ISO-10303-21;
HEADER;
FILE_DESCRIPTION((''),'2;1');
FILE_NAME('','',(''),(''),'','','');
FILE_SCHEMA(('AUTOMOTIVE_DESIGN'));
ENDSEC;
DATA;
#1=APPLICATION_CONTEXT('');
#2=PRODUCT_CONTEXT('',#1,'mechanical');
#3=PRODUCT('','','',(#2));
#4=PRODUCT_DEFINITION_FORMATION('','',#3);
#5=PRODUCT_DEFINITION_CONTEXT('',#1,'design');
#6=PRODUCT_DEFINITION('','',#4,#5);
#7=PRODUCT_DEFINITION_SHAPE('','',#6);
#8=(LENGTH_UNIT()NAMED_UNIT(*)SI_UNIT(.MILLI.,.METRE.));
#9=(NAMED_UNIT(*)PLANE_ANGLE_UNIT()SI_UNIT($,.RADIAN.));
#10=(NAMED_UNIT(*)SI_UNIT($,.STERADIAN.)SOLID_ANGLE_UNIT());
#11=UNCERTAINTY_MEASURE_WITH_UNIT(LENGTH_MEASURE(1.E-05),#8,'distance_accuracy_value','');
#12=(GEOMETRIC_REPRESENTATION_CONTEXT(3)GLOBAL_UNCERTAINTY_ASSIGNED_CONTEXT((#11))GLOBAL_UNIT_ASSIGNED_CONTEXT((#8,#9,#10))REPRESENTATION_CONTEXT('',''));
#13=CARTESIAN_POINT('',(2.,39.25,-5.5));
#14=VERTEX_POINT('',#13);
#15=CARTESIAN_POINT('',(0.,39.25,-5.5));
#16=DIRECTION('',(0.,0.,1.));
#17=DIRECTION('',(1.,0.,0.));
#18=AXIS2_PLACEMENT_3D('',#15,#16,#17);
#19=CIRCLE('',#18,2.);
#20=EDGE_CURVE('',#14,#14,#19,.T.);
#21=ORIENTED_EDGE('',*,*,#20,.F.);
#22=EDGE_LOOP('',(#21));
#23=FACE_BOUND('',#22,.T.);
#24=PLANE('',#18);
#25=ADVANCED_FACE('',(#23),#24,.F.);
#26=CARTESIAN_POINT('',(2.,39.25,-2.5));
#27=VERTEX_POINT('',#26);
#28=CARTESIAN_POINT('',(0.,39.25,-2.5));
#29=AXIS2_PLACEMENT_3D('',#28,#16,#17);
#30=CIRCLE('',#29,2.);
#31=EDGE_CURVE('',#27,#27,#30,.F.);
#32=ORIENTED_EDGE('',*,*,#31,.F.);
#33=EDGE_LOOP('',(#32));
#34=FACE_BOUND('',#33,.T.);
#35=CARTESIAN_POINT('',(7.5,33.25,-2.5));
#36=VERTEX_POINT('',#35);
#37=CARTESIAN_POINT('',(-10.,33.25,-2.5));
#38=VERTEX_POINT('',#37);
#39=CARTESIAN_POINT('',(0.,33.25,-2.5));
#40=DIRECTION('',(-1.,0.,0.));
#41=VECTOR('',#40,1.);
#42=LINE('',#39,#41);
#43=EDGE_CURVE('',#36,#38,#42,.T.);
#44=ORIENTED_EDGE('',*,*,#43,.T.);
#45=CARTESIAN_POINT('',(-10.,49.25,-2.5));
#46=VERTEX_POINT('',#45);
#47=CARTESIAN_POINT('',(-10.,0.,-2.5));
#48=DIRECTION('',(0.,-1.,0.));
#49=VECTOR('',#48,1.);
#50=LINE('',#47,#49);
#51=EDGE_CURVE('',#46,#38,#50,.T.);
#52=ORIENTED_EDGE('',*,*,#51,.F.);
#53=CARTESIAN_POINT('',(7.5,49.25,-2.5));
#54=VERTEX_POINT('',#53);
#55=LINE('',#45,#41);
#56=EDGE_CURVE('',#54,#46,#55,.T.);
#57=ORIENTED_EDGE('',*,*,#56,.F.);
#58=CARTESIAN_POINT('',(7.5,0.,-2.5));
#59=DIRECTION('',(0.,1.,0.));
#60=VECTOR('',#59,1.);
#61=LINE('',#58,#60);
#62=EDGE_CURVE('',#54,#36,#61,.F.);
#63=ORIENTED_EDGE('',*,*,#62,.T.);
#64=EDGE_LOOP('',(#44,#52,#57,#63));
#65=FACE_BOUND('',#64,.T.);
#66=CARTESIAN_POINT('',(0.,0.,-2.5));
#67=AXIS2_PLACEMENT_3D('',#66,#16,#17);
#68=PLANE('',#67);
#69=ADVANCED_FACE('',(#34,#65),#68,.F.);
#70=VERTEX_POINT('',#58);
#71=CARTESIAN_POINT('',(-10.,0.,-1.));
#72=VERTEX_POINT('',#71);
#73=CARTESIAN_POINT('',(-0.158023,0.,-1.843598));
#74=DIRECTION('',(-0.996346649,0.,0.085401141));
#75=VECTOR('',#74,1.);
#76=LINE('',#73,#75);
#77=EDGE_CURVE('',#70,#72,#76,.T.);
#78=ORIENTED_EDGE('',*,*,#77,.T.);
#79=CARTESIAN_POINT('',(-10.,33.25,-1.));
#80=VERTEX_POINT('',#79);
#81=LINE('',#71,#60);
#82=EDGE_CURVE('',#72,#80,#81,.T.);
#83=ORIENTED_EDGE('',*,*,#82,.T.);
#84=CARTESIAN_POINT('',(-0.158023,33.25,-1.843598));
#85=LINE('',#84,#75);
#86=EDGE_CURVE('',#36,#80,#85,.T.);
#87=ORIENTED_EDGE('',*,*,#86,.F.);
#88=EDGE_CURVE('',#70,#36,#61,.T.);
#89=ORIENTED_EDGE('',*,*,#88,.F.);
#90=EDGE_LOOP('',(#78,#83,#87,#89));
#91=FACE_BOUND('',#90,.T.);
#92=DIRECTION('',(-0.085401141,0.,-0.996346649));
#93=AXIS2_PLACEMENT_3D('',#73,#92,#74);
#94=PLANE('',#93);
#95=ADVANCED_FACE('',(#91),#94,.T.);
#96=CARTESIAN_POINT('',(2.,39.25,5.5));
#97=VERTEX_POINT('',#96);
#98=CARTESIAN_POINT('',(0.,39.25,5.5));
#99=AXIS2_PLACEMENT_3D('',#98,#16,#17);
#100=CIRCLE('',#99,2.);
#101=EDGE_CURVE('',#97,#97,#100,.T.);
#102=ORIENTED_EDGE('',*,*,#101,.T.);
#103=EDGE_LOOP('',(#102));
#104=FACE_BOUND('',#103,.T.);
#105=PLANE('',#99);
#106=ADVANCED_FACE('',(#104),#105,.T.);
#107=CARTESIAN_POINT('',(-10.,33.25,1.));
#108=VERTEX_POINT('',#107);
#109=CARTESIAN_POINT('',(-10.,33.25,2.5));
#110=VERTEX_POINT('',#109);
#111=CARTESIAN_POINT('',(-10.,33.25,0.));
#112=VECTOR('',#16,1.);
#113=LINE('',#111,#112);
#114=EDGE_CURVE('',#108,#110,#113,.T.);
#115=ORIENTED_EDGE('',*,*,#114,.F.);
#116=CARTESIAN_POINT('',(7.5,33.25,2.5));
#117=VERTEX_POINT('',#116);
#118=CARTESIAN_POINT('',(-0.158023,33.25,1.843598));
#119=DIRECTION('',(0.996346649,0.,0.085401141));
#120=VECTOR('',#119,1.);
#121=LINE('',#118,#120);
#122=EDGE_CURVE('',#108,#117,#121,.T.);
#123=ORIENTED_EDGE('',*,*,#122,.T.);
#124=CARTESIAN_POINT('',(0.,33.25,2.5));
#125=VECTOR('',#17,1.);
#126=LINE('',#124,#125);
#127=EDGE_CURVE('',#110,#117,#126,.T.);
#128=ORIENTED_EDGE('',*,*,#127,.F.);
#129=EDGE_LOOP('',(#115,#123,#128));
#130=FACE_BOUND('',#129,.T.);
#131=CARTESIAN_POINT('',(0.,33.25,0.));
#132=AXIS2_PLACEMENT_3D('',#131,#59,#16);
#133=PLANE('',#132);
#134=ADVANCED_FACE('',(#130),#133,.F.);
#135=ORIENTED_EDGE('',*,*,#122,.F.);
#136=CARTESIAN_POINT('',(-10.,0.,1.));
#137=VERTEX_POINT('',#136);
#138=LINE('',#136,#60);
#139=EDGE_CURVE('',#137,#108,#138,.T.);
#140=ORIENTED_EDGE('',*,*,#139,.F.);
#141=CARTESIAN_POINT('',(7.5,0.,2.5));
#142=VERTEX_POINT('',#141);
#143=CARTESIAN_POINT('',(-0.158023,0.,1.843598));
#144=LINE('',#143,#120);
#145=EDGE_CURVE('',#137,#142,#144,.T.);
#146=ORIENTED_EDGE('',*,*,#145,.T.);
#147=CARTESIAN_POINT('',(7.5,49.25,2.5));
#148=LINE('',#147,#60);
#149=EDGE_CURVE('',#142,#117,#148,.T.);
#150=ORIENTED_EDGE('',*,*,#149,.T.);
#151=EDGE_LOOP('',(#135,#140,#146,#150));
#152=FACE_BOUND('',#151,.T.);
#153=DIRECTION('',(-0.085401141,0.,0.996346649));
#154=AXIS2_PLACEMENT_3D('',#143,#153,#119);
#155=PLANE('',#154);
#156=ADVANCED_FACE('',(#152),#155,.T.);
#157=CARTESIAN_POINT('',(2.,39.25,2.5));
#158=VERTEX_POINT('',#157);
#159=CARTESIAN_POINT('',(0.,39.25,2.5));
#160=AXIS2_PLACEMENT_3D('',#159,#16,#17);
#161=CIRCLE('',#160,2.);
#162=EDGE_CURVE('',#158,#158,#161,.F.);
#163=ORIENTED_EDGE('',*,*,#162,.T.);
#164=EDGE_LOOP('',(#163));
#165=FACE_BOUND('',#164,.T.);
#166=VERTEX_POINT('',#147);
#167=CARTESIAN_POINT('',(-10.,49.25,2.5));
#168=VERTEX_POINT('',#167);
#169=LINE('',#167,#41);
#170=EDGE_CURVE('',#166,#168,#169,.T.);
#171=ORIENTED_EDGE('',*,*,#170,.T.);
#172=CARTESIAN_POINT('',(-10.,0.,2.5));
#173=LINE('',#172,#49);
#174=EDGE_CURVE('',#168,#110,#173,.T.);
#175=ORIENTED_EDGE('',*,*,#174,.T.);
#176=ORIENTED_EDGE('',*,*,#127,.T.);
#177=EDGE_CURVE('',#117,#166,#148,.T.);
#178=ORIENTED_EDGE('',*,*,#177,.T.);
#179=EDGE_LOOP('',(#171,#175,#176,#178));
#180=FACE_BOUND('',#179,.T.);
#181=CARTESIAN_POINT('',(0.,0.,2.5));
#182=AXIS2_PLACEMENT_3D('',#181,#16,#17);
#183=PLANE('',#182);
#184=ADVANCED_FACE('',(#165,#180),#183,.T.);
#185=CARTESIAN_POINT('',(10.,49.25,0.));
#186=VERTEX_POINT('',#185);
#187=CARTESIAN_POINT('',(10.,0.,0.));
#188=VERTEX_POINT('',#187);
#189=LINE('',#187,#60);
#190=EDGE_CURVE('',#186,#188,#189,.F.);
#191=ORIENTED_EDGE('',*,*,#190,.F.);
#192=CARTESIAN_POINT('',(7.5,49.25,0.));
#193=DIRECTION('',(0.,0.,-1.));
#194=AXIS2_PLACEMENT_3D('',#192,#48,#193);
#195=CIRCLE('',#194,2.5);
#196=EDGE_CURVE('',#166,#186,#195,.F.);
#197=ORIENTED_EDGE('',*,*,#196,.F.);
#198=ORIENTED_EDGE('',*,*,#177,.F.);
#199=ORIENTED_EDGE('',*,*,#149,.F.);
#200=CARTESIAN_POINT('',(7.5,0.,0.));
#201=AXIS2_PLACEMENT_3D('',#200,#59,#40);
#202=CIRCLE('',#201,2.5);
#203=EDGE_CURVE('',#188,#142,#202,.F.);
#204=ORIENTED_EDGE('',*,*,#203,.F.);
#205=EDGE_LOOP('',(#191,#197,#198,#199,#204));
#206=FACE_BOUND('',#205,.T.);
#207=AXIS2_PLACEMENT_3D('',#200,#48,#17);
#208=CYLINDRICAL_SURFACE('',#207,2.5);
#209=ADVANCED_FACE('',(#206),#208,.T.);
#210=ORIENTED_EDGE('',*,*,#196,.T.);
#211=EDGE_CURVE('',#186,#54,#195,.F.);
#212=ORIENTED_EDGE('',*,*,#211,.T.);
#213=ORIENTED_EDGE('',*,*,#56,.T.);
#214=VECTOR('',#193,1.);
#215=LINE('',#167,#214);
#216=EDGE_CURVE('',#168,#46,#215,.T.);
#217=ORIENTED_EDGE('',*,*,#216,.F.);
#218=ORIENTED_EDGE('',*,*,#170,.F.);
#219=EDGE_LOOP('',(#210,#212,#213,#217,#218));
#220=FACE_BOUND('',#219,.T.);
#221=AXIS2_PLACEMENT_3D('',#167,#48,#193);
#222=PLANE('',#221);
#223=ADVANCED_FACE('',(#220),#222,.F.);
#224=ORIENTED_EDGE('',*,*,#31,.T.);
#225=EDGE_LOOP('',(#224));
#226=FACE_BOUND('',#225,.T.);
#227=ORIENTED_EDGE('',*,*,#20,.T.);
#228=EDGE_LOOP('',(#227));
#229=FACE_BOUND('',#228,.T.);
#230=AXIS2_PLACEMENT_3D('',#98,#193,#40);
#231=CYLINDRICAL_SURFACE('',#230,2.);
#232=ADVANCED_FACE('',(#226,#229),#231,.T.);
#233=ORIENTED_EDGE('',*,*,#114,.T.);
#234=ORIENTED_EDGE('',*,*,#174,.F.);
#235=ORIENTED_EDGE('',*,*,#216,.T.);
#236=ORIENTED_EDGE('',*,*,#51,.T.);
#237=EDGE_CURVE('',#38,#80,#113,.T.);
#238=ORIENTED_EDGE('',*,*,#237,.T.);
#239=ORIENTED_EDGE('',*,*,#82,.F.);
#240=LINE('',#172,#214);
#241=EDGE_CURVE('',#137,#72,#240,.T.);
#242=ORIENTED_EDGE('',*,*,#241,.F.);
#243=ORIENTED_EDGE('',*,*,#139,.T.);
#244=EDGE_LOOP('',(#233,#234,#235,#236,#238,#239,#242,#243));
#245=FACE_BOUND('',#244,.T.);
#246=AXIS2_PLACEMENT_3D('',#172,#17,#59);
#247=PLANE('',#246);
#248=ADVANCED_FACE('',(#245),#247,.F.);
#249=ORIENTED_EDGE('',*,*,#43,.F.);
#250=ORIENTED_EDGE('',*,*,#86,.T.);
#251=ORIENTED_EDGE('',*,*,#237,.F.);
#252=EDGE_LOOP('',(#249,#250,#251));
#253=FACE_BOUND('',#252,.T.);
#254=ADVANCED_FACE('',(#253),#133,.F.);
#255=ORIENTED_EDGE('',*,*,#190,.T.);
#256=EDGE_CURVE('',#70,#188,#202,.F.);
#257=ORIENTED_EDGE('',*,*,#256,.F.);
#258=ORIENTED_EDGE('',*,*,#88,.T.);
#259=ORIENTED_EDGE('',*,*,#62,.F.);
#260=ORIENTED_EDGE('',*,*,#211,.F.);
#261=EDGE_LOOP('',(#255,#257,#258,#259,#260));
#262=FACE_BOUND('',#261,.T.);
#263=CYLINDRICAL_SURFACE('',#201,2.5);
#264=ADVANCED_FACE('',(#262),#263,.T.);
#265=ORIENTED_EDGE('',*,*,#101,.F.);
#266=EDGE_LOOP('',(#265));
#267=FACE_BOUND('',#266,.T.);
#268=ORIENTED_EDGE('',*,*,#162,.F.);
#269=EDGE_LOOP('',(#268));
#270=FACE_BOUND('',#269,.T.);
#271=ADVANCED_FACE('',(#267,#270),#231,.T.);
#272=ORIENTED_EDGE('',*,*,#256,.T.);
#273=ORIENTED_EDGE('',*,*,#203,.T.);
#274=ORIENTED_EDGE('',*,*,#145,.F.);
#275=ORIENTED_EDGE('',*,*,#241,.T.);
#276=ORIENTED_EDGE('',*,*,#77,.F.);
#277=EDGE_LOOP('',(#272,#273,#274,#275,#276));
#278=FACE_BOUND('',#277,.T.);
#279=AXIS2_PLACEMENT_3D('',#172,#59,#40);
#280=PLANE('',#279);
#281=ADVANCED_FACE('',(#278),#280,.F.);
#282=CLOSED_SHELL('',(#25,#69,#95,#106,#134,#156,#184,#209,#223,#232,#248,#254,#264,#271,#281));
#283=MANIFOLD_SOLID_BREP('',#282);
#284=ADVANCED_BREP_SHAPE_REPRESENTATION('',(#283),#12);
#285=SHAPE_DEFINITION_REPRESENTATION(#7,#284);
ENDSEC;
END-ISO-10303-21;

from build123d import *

# Parameters (mm, degrees)
SKETCH1_W           = 20
SKETCH1_H           = 49.25
BOSS_EXTRUDE1_DEPTH = 2.5
FILLET3_R           = 2.5
CUT_EXTRUDE1_START  = -16
CUT_EXTRUDE1_DEPTH  = 35.317119353
SKETCH14_R          = 2
BOSS_EXTRUDE2_DEPTH = 5.5


with BuildPart() as part:
    # Sketch1 → Boss-Extrude1 (new, symmetric)
    with BuildSketch(Plane.XY):
        with Locations((0, 24.625)):
            Rectangle(SKETCH1_W, SKETCH1_H)
    extrude(amount=BOSS_EXTRUDE1_DEPTH, both=True)

    # Fillet3
    fillet3_edges = [part.edges().sort_by_distance(p)[0] for p in [
        (10, 24.625, 2.5),
        (10, 24.625, -2.5),
    ]]
    fillet(fillet3_edges, radius=FILLET3_R - 0.0001)  # a hair under: the kernel refuses the full size

    # Sketch11 → Cut-Extrude1 (cut, through all)
    with BuildSketch(Plane(origin=(0, 49.25, 0), x_dir=(1, 0, 0), z_dir=(0, 1, 0)).offset(CUT_EXTRUDE1_START)):
        Polygon((-10, 1), (7.5, 2.5), (-10, 2.5), align=None)
        Polygon((7.5, -2.5), (-10, -1), (-10, -2.5), align=None)
    extrude(amount=-CUT_EXTRUDE1_DEPTH, mode=Mode.SUBTRACT)

    # Sketch14 → Boss-Extrude2 (add, symmetric)
    with BuildSketch(Plane.XY):
        with Locations((0, 39.25)):
            Circle(SKETCH14_R)
    extrude(amount=BOSS_EXTRUDE2_DEPTH, both=True)


solid = part.part
